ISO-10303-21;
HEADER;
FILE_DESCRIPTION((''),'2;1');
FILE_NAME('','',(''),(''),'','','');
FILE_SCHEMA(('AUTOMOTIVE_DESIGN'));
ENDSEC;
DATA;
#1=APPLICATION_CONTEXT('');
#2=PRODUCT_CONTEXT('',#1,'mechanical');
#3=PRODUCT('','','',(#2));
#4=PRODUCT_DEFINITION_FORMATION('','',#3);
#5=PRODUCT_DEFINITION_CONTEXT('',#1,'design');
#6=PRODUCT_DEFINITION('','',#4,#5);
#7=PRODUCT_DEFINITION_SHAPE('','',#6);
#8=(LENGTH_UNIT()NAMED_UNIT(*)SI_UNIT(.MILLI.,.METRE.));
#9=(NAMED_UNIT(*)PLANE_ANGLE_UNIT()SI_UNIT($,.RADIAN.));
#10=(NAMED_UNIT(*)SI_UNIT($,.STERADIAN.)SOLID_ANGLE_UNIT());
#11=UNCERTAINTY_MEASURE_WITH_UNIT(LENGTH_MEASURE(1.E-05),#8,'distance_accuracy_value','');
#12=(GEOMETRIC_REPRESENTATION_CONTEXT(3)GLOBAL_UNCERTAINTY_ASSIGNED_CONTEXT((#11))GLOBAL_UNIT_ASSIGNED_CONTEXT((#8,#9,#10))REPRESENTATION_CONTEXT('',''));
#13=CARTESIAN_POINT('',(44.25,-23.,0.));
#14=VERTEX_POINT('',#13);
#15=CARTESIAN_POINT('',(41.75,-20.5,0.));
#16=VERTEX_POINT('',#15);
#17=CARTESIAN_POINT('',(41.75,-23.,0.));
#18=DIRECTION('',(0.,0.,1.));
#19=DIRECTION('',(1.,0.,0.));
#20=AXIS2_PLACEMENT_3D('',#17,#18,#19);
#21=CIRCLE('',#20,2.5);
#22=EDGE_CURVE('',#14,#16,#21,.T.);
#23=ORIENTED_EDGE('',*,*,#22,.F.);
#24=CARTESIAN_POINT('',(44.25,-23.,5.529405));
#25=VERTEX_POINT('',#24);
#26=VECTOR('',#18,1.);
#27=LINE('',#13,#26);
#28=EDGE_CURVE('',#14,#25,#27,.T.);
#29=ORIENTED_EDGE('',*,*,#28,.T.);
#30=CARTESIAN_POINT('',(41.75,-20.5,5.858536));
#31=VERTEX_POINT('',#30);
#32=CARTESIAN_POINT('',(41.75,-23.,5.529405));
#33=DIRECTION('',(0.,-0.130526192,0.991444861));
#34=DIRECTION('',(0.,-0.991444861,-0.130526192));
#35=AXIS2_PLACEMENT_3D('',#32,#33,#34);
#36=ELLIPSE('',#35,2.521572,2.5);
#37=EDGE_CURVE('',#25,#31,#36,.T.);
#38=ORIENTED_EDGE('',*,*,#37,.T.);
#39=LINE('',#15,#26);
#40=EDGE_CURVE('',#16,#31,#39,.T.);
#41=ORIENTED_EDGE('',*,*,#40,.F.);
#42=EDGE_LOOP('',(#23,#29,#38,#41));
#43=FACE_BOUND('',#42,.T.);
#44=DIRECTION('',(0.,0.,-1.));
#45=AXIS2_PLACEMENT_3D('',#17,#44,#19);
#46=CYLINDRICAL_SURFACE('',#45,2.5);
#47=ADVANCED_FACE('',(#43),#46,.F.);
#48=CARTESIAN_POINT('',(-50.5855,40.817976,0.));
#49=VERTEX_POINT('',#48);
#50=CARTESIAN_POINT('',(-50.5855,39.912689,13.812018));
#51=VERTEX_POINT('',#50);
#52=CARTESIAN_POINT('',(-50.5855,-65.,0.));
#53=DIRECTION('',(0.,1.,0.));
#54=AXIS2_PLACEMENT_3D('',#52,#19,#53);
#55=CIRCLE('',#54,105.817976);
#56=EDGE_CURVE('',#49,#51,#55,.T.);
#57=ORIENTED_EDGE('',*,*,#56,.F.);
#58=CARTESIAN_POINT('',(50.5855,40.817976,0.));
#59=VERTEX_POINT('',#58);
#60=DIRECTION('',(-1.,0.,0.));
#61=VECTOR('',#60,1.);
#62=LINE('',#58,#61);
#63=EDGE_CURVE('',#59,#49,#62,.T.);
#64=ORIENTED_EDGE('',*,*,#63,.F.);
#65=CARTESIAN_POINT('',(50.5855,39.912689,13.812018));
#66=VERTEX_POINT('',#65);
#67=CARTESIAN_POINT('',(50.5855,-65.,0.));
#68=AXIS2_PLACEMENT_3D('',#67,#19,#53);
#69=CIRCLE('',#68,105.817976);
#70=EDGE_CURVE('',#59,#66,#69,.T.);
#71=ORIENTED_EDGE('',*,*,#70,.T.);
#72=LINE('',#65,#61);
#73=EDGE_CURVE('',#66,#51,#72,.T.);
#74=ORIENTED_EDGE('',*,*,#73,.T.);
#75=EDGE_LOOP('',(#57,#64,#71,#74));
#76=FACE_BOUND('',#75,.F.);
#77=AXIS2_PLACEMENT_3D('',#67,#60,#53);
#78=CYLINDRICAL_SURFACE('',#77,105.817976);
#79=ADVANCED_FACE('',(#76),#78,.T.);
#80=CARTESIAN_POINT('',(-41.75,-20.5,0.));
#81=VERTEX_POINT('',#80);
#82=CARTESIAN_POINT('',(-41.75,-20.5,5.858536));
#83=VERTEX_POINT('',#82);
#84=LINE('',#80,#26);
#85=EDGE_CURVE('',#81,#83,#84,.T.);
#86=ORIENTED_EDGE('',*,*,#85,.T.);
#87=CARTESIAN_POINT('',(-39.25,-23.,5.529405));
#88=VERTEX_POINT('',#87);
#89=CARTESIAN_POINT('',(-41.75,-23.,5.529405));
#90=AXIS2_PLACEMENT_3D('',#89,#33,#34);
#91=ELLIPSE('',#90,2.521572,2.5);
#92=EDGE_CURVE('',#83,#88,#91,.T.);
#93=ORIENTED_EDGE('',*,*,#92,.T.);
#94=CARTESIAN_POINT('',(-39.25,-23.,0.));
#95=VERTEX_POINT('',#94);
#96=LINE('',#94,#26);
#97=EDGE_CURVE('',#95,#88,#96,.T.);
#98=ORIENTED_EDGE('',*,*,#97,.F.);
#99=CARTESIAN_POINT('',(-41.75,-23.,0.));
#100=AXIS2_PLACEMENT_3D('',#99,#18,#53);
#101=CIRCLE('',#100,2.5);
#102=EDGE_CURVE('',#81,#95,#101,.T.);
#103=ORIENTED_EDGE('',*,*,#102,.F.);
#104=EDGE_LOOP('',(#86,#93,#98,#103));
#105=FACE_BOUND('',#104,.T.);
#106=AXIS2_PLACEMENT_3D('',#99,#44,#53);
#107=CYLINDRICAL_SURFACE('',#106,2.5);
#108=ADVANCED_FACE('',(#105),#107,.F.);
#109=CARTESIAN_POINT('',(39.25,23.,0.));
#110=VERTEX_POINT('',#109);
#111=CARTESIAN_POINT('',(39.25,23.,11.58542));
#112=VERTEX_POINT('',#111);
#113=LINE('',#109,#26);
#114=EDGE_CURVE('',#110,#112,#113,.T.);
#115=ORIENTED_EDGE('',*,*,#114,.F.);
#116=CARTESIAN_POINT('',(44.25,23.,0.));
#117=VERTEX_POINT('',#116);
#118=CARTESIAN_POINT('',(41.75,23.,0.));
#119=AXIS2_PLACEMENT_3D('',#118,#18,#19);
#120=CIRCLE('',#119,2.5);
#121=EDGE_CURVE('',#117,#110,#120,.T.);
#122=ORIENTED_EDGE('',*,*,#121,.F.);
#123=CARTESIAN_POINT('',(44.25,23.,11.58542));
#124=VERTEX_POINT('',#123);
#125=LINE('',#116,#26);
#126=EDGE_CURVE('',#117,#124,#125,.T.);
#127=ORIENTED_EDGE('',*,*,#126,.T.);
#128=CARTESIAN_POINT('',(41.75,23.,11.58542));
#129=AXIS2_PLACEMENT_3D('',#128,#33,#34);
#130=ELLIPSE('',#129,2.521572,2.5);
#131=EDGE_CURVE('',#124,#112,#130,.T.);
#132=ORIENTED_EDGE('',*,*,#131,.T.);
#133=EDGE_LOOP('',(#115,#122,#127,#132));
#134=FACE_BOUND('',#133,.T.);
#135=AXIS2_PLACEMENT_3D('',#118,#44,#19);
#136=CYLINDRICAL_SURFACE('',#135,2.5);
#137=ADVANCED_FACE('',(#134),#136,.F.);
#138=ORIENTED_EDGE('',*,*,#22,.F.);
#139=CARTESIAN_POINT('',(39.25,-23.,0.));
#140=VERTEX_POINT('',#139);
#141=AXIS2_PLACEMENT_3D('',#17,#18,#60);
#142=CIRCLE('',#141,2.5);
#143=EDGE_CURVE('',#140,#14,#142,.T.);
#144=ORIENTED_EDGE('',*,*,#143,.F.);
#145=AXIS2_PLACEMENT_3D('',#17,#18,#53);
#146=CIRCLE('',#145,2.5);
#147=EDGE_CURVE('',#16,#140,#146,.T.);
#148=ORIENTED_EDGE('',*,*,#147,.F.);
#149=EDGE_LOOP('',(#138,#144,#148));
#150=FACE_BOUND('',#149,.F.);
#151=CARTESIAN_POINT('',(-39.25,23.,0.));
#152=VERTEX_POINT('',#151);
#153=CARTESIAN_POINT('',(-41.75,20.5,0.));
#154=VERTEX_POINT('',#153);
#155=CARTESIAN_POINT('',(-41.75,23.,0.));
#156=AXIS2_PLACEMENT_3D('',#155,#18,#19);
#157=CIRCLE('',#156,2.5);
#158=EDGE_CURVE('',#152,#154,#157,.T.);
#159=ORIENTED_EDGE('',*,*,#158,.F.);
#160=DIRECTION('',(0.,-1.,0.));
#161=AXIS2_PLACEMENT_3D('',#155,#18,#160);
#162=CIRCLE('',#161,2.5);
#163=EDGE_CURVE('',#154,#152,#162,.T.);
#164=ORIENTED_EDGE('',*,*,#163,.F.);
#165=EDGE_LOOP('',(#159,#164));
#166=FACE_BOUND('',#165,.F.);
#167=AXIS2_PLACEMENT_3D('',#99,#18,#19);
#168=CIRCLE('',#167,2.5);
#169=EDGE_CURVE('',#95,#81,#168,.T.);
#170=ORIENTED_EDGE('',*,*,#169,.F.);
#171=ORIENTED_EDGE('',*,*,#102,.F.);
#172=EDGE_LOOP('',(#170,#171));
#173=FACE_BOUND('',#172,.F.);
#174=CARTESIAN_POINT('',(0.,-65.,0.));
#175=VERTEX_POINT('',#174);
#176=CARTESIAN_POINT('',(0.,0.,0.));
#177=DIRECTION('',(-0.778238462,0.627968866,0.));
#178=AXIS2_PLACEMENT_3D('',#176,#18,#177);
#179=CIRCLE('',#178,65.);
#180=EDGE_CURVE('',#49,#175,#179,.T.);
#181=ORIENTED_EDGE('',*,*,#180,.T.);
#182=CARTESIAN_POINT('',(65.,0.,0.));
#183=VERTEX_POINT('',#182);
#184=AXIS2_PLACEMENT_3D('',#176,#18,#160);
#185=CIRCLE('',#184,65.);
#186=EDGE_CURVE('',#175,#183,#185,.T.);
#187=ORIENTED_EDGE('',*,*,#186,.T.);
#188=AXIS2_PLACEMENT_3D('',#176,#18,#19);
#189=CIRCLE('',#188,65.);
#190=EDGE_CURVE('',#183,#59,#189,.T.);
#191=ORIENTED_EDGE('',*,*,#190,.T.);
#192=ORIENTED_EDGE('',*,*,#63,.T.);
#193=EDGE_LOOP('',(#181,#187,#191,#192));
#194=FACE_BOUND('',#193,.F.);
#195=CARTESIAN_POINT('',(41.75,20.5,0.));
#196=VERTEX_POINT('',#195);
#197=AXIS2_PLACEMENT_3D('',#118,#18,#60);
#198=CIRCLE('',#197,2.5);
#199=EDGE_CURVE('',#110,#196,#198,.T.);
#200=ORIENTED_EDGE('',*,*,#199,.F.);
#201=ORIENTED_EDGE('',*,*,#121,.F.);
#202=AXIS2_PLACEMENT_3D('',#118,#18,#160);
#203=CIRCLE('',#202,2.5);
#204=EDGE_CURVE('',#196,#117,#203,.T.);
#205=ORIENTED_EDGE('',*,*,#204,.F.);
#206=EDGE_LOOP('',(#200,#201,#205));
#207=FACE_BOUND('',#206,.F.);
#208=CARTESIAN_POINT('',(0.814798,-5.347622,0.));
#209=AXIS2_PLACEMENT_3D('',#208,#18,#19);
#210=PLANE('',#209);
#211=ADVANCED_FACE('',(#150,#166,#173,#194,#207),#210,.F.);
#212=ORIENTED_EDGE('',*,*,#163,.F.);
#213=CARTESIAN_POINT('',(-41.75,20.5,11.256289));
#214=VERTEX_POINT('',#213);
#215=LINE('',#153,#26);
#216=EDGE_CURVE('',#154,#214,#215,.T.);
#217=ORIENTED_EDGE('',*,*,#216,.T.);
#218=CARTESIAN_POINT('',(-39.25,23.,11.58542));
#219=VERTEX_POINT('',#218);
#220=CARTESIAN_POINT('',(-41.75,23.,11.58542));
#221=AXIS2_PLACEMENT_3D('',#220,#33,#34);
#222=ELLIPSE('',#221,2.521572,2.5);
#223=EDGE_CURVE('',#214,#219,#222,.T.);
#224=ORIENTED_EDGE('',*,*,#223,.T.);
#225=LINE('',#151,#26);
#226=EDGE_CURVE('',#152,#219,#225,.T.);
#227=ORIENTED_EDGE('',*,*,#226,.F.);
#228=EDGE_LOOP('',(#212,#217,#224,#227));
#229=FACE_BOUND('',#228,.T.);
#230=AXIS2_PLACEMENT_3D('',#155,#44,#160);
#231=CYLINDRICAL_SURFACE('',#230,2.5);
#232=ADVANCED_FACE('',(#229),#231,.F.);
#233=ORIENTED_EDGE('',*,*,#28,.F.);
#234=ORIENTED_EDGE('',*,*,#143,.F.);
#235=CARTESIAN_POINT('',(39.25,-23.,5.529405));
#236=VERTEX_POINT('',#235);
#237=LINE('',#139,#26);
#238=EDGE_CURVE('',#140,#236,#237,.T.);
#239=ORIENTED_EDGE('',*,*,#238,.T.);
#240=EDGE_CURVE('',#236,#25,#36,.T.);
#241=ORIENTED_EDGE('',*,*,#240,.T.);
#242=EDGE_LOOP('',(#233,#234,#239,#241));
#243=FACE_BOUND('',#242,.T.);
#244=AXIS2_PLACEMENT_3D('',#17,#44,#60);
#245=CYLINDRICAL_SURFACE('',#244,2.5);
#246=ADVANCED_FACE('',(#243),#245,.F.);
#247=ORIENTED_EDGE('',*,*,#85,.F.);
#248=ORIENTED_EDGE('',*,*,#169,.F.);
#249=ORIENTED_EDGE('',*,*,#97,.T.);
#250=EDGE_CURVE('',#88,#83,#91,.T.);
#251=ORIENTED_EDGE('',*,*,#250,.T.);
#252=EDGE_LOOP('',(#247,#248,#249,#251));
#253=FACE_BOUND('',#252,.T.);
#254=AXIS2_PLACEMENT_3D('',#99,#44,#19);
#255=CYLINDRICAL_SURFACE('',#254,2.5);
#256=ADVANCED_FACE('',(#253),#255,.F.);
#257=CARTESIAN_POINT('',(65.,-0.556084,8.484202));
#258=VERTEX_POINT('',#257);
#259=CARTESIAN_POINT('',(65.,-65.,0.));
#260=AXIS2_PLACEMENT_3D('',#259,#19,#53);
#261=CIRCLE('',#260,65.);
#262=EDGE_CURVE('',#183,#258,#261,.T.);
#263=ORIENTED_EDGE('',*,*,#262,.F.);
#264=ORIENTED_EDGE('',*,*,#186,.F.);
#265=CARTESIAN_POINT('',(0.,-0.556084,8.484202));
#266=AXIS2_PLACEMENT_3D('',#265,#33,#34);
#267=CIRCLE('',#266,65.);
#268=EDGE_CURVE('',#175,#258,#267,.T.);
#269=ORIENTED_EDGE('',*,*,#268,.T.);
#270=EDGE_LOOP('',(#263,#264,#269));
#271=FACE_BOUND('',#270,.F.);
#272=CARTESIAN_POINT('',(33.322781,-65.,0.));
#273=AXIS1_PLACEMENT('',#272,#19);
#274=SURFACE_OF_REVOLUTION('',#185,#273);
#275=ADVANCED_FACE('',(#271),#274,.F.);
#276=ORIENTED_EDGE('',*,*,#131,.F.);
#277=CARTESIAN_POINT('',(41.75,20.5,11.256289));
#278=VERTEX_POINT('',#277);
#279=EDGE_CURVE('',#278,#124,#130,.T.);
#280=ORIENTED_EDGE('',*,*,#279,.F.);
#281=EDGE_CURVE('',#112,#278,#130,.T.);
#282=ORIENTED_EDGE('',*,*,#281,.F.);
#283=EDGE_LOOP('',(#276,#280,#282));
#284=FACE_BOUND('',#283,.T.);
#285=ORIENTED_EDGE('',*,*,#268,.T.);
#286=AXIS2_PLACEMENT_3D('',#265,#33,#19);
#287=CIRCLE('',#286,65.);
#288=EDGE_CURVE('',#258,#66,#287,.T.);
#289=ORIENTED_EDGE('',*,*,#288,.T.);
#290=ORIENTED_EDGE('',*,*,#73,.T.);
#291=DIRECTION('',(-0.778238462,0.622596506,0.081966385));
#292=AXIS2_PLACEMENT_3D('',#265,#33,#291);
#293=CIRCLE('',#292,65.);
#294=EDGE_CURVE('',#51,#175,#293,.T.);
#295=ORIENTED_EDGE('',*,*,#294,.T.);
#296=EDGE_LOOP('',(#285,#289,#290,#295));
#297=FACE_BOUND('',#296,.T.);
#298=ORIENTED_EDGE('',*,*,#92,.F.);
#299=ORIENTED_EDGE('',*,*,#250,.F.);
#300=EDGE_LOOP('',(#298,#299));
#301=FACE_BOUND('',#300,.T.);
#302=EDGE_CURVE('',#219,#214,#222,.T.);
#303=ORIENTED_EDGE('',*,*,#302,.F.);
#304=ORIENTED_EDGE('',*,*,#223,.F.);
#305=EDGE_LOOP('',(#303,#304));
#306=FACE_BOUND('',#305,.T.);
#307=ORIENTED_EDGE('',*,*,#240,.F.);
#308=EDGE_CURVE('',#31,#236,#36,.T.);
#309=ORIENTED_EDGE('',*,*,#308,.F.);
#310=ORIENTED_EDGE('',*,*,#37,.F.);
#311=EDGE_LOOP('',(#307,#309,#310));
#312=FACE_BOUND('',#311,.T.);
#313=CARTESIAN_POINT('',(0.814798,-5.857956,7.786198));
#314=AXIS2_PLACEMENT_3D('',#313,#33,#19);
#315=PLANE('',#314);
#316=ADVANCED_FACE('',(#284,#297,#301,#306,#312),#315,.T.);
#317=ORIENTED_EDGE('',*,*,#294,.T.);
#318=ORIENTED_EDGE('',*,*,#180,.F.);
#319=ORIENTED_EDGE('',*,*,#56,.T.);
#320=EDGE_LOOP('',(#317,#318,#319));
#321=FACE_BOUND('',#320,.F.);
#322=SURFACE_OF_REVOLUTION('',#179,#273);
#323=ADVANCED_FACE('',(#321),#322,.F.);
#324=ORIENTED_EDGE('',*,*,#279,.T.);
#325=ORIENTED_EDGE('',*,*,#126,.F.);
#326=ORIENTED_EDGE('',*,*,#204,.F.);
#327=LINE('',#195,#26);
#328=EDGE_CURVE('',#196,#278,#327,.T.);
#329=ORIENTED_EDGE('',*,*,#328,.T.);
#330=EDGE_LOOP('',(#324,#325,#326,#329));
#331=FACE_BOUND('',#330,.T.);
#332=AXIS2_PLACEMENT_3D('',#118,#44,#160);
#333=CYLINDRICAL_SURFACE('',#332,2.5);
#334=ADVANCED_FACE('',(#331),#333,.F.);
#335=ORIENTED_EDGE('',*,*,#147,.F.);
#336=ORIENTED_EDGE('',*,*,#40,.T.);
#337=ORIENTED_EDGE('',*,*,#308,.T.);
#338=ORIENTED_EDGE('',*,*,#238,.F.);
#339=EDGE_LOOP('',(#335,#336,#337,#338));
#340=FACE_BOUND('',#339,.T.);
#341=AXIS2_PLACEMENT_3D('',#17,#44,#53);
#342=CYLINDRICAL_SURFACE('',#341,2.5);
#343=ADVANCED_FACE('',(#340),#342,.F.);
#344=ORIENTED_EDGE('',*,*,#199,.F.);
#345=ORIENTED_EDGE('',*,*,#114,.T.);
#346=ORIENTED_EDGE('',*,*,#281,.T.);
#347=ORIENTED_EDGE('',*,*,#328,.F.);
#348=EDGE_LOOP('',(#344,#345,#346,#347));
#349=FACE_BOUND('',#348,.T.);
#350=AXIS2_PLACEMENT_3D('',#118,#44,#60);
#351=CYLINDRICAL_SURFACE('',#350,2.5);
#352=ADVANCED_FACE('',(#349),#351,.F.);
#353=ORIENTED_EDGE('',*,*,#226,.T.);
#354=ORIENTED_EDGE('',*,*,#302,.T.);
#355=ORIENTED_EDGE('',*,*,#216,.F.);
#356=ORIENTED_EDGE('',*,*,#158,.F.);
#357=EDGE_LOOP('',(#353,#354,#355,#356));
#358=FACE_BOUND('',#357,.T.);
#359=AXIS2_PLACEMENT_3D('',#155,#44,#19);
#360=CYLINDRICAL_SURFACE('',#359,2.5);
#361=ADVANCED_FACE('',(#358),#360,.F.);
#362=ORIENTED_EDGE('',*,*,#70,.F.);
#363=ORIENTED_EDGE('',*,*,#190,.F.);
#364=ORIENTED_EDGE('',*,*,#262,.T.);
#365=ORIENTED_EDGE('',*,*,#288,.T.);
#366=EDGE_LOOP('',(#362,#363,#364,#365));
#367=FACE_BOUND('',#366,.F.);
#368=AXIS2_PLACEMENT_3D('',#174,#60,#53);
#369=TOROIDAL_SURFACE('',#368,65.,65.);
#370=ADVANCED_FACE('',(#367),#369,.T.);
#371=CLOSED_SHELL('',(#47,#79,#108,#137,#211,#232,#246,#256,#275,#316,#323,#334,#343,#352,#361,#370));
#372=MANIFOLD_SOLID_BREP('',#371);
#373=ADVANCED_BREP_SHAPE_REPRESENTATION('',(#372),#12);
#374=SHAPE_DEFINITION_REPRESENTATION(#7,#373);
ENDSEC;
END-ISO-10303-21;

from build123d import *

# Parameters (mm, degrees)
F1_ANGLE = 7.5
F2_DEPTH = 13.8130175157


# Not quite as in the source:
# - a feature names something its author has since deleted; it is built from what else it names


with BuildPart() as f1:
    # F0 (on Top) → F1 (revolve)
    with BuildSketch(Plane.XY):
        with BuildLine():
            ThreePointArc((0, -65), (45.9619407771, -45.9619407771), (65, 0))
            ThreePointArc((65, 0), (61.2905274084, 21.6441966818), (50.5855, 40.8179763064))
            Line((50.5855, 40.8179763064), (-50.5855, 40.8179763064))
            ThreePointArc((-50.5855, 40.8179763064), (-58.6437058, -28.034189306), (0, -65))
        make_face()
        with BuildLine():
            Line((39.25, -23), (-39.25, -23))
            ThreePointArc((-39.25, -23), (-43.517766953, -24.767766953), (-41.75, -20.5))
            Line((-41.75, -20.5), (-41.75, 20.5))
            ThreePointArc((-41.75, 20.5), (-43.517766953, 24.767766953), (-39.25, 23))
            Line((-39.25, 23), (39.25, 23))
            ThreePointArc((39.25, 23), (41.75, 25.5), (44.25, 23))
            ThreePointArc((44.25, 23), (43.517766953, 21.232233047), (41.75, 20.5))
            Line((41.75, 20.5), (41.75, -20.5))
            ThreePointArc((41.75, -20.5), (43.517766953, -21.232233047), (44.25, -23))
            ThreePointArc((44.25, -23), (41.75, -25.5), (39.25, -23))
        make_face(mode=Mode.SUBTRACT)
        with BuildLine():
            ThreePointArc((-41.75, -20.5), (-43.517766953, -24.767766953), (-39.25, -23))
            Line((-39.25, -23), (-41.75, -23))
            Line((-41.75, -23), (-41.75, -20.5))
        make_face()
        with BuildLine():
            ThreePointArc((-41.75, -20.5), (-39.982233047, -21.232233047), (-39.25, -23))
            Line((-39.25, -23), (39.25, -23))
            ThreePointArc((39.25, -23), (39.982233047, -21.232233047), (41.75, -20.5))
            Line((41.75, -20.5), (41.75, 20.5))
            ThreePointArc((41.75, 20.5), (39.982233047, 21.232233047), (39.25, 23))
            Line((39.25, 23), (-39.25, 23))
            ThreePointArc((-39.25, 23), (-39.982233047, 21.232233047), (-41.75, 20.5))
            Line((-41.75, 20.5), (-41.75, -20.5))
        make_face()
        with BuildLine():
            Line((-41.75, -23), (-39.25, -23))
            ThreePointArc((-39.25, -23), (-39.982233047, -21.232233047), (-41.75, -20.5))
            Line((-41.75, -20.5), (-41.75, -23))
        make_face()
        with BuildLine():
            ThreePointArc((41.75, -20.5), (39.982233047, -21.232233047), (39.25, -23))
            Line((39.25, -23), (41.75, -23))
            Line((41.75, -23), (41.75, -20.5))
        make_face()
        with BuildLine():
            Line((41.75, -23), (39.25, -23))
            ThreePointArc((39.25, -23), (41.75, -25.5), (44.25, -23))
            ThreePointArc((44.25, -23), (43.517766953, -21.232233047), (41.75, -20.5))
            Line((41.75, -20.5), (41.75, -23))
        make_face()
        with BuildLine():
            ThreePointArc((-39.25, 23), (-43.517766953, 24.767766953), (-41.75, 20.5))
            Line((-41.75, 20.5), (-41.75, 23))
            Line((-41.75, 23), (-39.25, 23))
        make_face()
        with BuildLine():
            Line((-41.75, 23), (-41.75, 20.5))
            ThreePointArc((-41.75, 20.5), (-39.982233047, 21.232233047), (-39.25, 23))
            Line((-39.25, 23), (-41.75, 23))
        make_face()
        with BuildLine():
            ThreePointArc((39.25, 23), (39.982233047, 21.232233047), (41.75, 20.5))
            Line((41.75, 20.5), (41.75, 23))
            Line((41.75, 23), (39.25, 23))
        make_face()
        with BuildLine():
            Line((41.75, 23), (41.75, 20.5))
            ThreePointArc((41.75, 20.5), (43.517766953, 21.232233047), (44.25, 23))
            ThreePointArc((44.25, 23), (41.75, 25.5), (39.25, 23))
            Line((39.25, 23), (41.75, 23))
        make_face()
    revolve(axis=Axis((33.3227813244, -65, 0), (1, 0, 0)), revolution_arc=F1_ANGLE)

    # F0 (on Top) → F2 (cut, through all)
    with BuildSketch(Plane.XY):
        with BuildLine():
            Line((-41.75, -23), (-39.25, -23))
            ThreePointArc((-39.25, -23), (-39.982233047, -21.232233047), (-41.75, -20.5))
            Line((-41.75, -20.5), (-41.75, -23))
        make_face()
        with BuildLine():
            ThreePointArc((-41.75, -20.5), (-43.517766953, -24.767766953), (-39.25, -23))
            Line((-39.25, -23), (-41.75, -23))
            Line((-41.75, -23), (-41.75, -20.5))
        make_face()
        with BuildLine():
            ThreePointArc((41.75, -20.5), (39.982233047, -21.232233047), (39.25, -23))
            Line((39.25, -23), (41.75, -23))
            Line((41.75, -23), (41.75, -20.5))
        make_face()
        with BuildLine():
            Line((41.75, -23), (39.25, -23))
            ThreePointArc((39.25, -23), (41.75, -25.5), (44.25, -23))
            ThreePointArc((44.25, -23), (43.517766953, -21.232233047), (41.75, -20.5))
            Line((41.75, -20.5), (41.75, -23))
        make_face()
        with BuildLine():
            ThreePointArc((39.25, 23), (39.982233047, 21.232233047), (41.75, 20.5))
            Line((41.75, 20.5), (41.75, 23))
            Line((41.75, 23), (39.25, 23))
        make_face()
        with BuildLine():
            Line((41.75, 23), (41.75, 20.5))
            ThreePointArc((41.75, 20.5), (43.517766953, 21.232233047), (44.25, 23))
            ThreePointArc((44.25, 23), (41.75, 25.5), (39.25, 23))
            Line((39.25, 23), (41.75, 23))
        make_face()
        with BuildLine():
            Line((-41.75, 23), (-41.75, 20.5))
            ThreePointArc((-41.75, 20.5), (-39.982233047, 21.232233047), (-39.25, 23))
            Line((-39.25, 23), (-41.75, 23))
        make_face()
        with BuildLine():
            ThreePointArc((-39.25, 23), (-43.517766953, 24.767766953), (-41.75, 20.5))
            Line((-41.75, 20.5), (-41.75, 23))
            Line((-41.75, 23), (-39.25, 23))
        make_face()
    extrude(amount=F2_DEPTH, mode=Mode.SUBTRACT)


solid = f1.part
